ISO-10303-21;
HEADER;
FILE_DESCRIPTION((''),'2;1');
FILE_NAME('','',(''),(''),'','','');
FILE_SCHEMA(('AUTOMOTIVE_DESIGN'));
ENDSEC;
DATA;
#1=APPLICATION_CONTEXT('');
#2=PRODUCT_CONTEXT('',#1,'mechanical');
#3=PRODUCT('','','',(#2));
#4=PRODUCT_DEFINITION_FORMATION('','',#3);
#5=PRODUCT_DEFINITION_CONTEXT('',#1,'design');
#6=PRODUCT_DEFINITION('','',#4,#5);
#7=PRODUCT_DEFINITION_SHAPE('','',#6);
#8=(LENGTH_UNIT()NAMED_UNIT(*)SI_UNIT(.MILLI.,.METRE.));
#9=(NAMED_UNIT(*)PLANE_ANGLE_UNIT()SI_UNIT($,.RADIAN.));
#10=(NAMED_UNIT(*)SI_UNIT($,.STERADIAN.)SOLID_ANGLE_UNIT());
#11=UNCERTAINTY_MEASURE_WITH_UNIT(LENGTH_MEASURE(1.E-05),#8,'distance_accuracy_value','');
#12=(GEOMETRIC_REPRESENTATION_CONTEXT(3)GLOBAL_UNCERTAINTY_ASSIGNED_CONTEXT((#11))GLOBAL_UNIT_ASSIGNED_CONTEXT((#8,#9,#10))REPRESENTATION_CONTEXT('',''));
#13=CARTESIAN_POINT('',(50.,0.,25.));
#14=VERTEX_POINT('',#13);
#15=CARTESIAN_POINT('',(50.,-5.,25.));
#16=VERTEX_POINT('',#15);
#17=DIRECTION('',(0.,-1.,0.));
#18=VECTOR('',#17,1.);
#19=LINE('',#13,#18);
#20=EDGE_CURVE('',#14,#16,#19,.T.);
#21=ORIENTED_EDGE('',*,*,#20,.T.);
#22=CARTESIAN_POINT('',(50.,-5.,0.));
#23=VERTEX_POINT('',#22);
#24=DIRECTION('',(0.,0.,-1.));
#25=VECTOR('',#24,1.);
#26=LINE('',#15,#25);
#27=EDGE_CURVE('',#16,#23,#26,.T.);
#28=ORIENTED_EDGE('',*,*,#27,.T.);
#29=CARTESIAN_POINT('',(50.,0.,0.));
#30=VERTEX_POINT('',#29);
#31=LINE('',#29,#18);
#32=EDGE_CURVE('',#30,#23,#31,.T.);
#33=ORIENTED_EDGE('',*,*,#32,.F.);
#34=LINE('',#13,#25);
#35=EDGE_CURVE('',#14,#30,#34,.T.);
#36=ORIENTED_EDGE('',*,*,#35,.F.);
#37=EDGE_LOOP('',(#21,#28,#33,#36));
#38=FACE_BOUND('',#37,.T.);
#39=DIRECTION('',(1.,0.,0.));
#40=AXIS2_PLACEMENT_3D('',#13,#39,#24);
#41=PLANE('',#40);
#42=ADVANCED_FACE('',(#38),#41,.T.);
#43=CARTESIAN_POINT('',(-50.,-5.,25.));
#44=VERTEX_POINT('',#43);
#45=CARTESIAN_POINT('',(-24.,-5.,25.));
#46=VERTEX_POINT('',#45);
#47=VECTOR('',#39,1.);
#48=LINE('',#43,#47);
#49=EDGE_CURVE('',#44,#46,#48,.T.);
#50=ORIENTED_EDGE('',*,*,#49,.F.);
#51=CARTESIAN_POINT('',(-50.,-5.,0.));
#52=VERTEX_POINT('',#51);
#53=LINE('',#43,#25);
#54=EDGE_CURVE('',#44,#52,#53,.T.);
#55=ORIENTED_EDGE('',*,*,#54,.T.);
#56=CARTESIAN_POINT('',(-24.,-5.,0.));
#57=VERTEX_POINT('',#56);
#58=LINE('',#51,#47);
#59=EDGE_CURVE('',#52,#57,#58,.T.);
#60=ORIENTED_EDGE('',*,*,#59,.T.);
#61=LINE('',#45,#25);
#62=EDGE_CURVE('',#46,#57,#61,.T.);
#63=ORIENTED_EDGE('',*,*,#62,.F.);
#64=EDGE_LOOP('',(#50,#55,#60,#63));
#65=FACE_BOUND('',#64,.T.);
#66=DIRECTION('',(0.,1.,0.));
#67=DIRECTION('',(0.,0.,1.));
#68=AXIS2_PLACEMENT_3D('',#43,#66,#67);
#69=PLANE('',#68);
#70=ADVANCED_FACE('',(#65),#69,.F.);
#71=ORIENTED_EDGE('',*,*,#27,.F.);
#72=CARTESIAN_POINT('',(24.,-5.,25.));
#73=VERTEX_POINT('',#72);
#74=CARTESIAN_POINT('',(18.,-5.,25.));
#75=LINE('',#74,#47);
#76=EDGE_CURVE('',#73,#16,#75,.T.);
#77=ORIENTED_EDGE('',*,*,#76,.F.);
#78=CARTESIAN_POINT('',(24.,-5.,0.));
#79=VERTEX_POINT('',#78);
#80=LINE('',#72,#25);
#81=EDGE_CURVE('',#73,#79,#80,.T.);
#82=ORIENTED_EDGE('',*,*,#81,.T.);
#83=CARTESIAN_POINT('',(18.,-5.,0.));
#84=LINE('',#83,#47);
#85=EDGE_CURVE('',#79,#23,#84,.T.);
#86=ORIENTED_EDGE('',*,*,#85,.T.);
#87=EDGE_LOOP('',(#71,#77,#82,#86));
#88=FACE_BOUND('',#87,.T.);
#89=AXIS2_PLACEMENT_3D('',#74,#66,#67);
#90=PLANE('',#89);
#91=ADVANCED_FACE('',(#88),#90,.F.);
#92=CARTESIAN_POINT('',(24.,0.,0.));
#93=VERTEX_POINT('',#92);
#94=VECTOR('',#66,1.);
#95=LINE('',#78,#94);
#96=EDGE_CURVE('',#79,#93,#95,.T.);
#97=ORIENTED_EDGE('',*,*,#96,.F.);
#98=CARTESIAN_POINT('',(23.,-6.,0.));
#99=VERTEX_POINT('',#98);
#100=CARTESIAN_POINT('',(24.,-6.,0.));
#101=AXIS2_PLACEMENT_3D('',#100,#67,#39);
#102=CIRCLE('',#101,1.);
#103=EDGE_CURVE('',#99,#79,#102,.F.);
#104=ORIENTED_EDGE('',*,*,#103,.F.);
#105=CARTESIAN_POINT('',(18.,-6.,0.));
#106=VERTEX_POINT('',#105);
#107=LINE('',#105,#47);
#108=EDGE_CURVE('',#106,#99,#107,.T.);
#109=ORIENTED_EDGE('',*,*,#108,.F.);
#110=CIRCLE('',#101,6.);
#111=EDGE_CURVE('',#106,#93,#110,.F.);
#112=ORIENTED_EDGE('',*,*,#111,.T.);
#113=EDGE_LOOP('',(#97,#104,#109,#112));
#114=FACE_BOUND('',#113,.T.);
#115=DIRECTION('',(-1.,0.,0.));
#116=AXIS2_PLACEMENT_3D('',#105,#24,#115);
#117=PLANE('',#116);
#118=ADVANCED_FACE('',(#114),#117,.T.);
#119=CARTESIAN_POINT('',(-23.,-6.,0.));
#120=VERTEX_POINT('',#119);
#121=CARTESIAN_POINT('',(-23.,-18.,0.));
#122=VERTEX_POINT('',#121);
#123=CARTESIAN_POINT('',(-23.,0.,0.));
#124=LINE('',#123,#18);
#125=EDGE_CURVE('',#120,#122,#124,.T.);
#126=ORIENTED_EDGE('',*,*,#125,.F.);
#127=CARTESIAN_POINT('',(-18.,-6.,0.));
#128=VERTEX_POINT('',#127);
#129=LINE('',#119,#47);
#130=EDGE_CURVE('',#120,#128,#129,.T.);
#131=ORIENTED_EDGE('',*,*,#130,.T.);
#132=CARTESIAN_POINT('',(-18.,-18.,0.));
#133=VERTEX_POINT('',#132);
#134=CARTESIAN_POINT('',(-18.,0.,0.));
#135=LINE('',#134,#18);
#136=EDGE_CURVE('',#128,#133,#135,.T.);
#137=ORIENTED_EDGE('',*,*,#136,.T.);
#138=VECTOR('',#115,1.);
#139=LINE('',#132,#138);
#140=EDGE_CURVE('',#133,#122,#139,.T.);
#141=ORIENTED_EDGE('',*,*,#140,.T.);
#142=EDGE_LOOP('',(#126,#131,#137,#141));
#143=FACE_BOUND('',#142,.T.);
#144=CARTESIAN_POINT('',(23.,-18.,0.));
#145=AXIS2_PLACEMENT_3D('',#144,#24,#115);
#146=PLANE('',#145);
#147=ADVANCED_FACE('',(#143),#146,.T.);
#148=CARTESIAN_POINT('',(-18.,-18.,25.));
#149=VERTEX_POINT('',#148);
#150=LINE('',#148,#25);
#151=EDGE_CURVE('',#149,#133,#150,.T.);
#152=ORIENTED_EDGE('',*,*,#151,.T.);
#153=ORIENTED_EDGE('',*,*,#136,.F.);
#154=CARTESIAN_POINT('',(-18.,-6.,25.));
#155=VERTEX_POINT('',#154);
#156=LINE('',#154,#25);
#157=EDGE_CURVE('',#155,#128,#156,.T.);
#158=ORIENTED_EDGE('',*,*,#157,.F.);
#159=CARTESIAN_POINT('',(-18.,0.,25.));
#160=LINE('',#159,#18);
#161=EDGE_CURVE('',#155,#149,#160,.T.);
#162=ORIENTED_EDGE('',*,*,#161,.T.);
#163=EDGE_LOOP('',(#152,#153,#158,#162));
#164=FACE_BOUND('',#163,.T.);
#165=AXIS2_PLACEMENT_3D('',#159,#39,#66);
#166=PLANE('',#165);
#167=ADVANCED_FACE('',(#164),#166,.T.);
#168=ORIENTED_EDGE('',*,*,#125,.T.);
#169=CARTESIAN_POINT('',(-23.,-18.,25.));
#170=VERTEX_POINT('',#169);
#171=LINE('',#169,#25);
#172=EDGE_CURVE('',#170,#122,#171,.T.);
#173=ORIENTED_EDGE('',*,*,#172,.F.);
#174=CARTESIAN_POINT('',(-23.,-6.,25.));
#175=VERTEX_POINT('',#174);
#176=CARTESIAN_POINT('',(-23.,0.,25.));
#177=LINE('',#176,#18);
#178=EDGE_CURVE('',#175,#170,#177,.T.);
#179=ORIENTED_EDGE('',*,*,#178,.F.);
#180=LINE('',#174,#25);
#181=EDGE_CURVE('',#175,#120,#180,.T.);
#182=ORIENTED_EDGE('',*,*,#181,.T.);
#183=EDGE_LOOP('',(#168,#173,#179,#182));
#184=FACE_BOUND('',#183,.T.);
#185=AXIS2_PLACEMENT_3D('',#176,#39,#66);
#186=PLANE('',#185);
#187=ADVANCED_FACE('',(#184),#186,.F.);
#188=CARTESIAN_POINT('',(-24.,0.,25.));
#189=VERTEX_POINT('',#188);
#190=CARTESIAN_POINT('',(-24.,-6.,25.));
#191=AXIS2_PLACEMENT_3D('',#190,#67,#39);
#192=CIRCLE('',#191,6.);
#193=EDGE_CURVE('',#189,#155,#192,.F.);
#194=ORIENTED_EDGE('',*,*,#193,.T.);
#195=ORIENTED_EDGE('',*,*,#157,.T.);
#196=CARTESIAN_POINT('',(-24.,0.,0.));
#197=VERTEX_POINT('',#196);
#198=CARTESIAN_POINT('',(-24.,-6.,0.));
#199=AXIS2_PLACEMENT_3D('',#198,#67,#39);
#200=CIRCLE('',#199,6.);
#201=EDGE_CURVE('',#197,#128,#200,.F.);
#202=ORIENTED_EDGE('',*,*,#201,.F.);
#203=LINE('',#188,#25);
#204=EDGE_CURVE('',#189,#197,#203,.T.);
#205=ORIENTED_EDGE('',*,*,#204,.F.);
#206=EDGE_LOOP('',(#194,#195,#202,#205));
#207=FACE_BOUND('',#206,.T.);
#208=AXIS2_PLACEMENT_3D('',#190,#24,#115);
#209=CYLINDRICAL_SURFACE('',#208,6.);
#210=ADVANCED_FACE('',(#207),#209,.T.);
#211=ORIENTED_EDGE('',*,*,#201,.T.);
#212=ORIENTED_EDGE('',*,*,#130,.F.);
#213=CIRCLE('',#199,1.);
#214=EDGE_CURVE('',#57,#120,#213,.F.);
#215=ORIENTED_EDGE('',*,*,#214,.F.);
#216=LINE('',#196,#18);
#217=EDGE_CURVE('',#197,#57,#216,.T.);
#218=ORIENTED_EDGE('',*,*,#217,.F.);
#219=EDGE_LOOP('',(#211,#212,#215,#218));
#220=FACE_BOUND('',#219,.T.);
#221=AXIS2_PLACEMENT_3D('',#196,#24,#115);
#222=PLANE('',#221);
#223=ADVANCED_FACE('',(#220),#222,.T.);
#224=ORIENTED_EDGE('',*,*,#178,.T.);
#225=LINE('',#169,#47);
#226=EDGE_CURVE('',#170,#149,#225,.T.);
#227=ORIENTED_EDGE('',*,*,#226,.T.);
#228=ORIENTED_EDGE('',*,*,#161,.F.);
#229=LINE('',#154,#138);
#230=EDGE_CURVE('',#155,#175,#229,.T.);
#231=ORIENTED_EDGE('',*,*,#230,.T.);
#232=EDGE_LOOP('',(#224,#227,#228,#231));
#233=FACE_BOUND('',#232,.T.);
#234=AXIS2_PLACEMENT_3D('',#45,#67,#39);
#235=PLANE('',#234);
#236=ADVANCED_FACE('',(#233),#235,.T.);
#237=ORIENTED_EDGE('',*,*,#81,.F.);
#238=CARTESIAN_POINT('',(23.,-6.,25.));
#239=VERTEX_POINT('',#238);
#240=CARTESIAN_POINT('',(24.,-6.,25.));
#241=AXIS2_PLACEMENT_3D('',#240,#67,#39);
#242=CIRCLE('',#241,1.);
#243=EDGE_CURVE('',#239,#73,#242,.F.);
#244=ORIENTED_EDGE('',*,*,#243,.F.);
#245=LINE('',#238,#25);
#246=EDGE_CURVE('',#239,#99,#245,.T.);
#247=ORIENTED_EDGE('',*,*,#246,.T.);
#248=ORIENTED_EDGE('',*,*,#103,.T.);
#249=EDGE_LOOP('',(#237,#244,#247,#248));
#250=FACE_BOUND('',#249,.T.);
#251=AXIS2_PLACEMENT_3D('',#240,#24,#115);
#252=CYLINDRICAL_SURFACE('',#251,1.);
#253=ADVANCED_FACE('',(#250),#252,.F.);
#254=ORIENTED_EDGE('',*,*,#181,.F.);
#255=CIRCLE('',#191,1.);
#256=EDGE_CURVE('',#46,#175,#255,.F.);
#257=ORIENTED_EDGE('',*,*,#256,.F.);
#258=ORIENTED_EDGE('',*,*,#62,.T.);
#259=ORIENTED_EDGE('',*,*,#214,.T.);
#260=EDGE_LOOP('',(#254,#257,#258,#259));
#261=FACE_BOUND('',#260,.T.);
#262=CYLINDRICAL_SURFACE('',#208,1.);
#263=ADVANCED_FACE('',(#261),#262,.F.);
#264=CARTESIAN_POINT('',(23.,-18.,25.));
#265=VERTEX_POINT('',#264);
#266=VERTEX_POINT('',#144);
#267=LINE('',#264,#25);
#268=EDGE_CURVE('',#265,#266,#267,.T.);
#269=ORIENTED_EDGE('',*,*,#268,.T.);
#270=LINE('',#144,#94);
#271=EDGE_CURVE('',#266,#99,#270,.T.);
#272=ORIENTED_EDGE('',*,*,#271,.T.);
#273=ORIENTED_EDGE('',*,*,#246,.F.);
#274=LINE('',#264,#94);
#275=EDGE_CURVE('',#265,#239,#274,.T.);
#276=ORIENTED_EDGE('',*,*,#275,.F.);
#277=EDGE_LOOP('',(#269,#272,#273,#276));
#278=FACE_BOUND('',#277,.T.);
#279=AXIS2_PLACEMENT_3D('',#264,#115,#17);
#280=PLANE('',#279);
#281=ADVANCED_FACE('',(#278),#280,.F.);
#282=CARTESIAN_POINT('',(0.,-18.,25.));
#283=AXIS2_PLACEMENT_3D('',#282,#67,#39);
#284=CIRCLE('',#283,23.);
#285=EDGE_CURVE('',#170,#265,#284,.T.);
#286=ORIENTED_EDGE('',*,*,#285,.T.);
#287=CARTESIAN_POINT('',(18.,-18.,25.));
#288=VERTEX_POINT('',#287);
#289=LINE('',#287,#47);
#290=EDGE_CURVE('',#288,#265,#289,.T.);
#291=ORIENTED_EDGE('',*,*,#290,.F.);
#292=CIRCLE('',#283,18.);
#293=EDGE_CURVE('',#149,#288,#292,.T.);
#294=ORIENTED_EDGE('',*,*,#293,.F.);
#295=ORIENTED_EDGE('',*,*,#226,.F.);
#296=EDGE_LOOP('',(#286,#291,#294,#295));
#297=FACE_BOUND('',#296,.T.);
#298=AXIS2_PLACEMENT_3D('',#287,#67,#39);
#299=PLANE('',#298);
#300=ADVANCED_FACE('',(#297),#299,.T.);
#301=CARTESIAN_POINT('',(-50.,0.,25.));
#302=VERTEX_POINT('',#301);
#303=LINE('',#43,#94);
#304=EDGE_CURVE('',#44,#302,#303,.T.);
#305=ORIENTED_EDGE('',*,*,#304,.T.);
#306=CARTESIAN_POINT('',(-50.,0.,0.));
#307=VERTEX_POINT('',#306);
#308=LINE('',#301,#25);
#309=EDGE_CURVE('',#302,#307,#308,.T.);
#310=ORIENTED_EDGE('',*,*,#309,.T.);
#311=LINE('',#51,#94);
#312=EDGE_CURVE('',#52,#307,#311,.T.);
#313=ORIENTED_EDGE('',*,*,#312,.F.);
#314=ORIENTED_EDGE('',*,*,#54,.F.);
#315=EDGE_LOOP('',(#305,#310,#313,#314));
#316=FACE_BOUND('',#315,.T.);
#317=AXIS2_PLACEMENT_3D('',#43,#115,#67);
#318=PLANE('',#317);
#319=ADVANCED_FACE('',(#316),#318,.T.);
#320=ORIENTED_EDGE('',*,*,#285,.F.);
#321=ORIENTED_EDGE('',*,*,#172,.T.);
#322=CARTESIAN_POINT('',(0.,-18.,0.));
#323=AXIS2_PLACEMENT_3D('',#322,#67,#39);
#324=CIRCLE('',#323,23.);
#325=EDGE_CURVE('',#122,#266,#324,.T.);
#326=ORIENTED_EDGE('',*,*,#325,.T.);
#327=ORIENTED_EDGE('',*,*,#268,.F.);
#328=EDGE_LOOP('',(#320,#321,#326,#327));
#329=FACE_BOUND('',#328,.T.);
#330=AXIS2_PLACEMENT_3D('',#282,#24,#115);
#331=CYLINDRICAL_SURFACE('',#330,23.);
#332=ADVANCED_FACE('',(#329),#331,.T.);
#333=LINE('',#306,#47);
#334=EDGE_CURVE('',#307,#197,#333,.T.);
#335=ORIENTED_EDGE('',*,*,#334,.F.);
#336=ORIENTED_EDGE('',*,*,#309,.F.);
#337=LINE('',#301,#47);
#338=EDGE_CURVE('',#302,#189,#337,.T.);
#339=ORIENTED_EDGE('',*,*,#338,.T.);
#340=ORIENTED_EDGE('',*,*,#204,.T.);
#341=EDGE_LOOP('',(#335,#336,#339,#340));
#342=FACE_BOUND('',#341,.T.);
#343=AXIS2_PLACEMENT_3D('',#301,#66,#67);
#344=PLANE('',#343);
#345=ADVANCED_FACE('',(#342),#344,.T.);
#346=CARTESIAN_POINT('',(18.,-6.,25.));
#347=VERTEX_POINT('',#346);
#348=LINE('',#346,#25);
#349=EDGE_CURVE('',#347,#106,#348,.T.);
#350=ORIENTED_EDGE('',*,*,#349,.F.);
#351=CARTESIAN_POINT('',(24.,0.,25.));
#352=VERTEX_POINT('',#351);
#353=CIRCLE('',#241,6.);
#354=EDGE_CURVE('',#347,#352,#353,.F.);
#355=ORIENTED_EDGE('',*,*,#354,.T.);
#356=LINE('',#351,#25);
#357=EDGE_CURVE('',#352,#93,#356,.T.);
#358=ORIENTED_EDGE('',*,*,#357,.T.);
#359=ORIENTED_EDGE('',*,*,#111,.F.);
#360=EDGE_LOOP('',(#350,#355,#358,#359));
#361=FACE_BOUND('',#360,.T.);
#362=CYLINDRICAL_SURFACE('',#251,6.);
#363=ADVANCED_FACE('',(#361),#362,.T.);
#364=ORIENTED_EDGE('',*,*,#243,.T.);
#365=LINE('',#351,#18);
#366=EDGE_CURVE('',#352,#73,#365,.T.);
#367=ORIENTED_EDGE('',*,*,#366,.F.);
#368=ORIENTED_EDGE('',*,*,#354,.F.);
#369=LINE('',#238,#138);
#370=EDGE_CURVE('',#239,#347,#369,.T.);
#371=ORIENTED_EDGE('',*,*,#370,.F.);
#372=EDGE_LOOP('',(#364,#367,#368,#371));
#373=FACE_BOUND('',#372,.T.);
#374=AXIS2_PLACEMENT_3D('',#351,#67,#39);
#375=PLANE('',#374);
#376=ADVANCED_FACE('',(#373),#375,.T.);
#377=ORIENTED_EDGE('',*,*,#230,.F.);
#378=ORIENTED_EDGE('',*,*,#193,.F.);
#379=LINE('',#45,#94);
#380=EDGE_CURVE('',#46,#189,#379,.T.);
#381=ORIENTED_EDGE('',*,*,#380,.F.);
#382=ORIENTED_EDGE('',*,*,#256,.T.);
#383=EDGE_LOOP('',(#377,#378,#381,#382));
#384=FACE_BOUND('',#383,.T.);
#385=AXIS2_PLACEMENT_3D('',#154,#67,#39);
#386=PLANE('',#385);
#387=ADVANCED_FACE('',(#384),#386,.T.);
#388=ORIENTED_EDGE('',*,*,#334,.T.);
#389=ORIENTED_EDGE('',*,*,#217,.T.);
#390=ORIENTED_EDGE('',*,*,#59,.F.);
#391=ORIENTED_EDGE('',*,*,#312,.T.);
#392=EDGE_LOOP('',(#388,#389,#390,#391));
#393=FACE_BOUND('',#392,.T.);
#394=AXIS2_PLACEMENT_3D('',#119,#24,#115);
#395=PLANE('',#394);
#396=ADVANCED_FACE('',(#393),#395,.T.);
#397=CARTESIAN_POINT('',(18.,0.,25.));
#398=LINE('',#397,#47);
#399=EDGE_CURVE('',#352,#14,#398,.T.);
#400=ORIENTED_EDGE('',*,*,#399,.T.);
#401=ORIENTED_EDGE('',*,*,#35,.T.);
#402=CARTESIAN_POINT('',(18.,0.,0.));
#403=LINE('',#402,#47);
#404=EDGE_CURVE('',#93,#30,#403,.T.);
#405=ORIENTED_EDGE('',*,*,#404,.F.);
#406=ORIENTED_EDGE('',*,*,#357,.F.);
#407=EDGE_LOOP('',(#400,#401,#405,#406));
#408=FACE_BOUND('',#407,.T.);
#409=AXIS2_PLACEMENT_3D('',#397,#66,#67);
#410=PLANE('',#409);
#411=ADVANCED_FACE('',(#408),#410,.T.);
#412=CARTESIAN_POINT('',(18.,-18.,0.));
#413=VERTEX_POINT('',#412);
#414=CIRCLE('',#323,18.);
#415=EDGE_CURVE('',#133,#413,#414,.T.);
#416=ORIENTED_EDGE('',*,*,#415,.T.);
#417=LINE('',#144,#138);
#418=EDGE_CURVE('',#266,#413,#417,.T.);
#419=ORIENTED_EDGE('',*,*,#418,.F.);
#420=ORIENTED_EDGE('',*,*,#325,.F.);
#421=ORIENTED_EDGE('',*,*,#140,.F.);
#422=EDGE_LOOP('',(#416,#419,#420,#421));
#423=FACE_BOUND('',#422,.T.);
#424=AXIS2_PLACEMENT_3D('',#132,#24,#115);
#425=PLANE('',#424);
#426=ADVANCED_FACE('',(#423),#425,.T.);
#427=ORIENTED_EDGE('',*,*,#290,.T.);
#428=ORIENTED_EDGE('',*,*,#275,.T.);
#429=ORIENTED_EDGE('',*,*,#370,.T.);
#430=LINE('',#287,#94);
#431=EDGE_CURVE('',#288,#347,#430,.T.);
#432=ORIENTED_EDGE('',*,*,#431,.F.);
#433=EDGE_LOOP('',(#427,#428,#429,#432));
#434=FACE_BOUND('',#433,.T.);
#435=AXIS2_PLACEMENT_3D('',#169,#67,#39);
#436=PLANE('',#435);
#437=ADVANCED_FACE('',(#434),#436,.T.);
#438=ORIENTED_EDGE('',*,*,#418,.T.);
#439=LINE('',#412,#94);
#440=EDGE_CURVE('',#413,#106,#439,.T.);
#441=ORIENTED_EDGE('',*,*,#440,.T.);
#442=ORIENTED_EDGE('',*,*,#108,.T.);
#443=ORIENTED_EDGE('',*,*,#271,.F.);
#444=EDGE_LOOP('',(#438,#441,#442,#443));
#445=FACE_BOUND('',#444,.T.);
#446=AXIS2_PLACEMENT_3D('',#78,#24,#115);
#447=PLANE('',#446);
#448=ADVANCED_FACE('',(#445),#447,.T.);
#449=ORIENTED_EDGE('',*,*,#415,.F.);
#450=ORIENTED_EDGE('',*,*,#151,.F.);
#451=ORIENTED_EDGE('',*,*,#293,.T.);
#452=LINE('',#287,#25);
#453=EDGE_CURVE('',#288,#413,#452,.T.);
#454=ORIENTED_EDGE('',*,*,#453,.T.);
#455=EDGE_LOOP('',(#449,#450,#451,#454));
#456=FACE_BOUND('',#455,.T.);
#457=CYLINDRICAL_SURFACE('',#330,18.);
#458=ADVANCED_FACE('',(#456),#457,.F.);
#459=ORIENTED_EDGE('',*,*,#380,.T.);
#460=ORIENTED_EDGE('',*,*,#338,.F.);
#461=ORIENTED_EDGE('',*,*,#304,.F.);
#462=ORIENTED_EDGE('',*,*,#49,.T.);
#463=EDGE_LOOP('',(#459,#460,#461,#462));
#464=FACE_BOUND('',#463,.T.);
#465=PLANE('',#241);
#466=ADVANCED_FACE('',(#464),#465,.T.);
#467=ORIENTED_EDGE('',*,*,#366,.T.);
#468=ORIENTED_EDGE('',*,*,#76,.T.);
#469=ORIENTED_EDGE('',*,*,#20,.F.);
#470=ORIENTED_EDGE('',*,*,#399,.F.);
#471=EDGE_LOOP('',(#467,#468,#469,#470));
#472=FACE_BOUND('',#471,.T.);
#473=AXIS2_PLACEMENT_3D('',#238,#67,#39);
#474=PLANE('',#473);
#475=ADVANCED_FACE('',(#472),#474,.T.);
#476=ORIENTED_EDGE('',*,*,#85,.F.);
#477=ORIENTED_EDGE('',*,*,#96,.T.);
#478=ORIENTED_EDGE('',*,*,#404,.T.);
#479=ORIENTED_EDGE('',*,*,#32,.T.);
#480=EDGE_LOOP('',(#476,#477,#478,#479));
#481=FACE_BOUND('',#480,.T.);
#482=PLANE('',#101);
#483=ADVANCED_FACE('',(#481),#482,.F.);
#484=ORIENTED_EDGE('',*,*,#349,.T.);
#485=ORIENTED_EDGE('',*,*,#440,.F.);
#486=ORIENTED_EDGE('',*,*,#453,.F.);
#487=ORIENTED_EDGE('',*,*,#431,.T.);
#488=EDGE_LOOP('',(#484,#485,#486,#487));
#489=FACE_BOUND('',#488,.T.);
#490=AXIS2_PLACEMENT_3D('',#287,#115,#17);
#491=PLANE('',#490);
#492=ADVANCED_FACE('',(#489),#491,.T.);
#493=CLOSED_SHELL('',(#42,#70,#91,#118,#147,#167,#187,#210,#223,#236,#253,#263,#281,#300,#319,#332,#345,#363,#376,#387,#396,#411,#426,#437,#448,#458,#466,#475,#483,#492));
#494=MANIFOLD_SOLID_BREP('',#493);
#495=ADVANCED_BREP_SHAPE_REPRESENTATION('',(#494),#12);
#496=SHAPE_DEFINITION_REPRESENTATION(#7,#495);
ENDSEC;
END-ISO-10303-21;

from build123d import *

# Parameters (mm, degrees)
BASE_FLANGE1_DEPTH = 25


# Sheet-metal steps are written as plain solids
with BuildPart() as part:
    # Sketch1 → Base-Flange1 (new body)
    with BuildSketch(Plane.XY):
        with BuildLine():
            Line((-50, 0), (-24, 0))
            ThreePointArc((-24, 0), (-19.757359313, -1.757359313), (-18, -6))
            Line((-18, -6), (-18, -18))
            ThreePointArc((-18, -18), (0, -36), (18, -18))
            Line((18, -18), (18, -6))
            ThreePointArc((18, -6), (19.757359313, -1.757359313), (24, 0))
            Line((24, 0), (50, 0))
            Line((50, 0), (50, -5))
            Line((50, -5), (24, -5))
            ThreePointArc((24, -5), (23.292893219, -5.292893219), (23, -6))
            Line((23, -6), (23, -18))
            ThreePointArc((23, -18), (0, -41), (-23, -18))
            Line((-23, -18), (-23, -6))
            ThreePointArc((-23, -6), (-23.292893219, -5.292893219), (-24, -5))
            Line((-24, -5), (-50, -5))
            Line((-50, -5), (-50, 0))
        make_face()
    extrude(amount=BASE_FLANGE1_DEPTH)


solid = part.part
